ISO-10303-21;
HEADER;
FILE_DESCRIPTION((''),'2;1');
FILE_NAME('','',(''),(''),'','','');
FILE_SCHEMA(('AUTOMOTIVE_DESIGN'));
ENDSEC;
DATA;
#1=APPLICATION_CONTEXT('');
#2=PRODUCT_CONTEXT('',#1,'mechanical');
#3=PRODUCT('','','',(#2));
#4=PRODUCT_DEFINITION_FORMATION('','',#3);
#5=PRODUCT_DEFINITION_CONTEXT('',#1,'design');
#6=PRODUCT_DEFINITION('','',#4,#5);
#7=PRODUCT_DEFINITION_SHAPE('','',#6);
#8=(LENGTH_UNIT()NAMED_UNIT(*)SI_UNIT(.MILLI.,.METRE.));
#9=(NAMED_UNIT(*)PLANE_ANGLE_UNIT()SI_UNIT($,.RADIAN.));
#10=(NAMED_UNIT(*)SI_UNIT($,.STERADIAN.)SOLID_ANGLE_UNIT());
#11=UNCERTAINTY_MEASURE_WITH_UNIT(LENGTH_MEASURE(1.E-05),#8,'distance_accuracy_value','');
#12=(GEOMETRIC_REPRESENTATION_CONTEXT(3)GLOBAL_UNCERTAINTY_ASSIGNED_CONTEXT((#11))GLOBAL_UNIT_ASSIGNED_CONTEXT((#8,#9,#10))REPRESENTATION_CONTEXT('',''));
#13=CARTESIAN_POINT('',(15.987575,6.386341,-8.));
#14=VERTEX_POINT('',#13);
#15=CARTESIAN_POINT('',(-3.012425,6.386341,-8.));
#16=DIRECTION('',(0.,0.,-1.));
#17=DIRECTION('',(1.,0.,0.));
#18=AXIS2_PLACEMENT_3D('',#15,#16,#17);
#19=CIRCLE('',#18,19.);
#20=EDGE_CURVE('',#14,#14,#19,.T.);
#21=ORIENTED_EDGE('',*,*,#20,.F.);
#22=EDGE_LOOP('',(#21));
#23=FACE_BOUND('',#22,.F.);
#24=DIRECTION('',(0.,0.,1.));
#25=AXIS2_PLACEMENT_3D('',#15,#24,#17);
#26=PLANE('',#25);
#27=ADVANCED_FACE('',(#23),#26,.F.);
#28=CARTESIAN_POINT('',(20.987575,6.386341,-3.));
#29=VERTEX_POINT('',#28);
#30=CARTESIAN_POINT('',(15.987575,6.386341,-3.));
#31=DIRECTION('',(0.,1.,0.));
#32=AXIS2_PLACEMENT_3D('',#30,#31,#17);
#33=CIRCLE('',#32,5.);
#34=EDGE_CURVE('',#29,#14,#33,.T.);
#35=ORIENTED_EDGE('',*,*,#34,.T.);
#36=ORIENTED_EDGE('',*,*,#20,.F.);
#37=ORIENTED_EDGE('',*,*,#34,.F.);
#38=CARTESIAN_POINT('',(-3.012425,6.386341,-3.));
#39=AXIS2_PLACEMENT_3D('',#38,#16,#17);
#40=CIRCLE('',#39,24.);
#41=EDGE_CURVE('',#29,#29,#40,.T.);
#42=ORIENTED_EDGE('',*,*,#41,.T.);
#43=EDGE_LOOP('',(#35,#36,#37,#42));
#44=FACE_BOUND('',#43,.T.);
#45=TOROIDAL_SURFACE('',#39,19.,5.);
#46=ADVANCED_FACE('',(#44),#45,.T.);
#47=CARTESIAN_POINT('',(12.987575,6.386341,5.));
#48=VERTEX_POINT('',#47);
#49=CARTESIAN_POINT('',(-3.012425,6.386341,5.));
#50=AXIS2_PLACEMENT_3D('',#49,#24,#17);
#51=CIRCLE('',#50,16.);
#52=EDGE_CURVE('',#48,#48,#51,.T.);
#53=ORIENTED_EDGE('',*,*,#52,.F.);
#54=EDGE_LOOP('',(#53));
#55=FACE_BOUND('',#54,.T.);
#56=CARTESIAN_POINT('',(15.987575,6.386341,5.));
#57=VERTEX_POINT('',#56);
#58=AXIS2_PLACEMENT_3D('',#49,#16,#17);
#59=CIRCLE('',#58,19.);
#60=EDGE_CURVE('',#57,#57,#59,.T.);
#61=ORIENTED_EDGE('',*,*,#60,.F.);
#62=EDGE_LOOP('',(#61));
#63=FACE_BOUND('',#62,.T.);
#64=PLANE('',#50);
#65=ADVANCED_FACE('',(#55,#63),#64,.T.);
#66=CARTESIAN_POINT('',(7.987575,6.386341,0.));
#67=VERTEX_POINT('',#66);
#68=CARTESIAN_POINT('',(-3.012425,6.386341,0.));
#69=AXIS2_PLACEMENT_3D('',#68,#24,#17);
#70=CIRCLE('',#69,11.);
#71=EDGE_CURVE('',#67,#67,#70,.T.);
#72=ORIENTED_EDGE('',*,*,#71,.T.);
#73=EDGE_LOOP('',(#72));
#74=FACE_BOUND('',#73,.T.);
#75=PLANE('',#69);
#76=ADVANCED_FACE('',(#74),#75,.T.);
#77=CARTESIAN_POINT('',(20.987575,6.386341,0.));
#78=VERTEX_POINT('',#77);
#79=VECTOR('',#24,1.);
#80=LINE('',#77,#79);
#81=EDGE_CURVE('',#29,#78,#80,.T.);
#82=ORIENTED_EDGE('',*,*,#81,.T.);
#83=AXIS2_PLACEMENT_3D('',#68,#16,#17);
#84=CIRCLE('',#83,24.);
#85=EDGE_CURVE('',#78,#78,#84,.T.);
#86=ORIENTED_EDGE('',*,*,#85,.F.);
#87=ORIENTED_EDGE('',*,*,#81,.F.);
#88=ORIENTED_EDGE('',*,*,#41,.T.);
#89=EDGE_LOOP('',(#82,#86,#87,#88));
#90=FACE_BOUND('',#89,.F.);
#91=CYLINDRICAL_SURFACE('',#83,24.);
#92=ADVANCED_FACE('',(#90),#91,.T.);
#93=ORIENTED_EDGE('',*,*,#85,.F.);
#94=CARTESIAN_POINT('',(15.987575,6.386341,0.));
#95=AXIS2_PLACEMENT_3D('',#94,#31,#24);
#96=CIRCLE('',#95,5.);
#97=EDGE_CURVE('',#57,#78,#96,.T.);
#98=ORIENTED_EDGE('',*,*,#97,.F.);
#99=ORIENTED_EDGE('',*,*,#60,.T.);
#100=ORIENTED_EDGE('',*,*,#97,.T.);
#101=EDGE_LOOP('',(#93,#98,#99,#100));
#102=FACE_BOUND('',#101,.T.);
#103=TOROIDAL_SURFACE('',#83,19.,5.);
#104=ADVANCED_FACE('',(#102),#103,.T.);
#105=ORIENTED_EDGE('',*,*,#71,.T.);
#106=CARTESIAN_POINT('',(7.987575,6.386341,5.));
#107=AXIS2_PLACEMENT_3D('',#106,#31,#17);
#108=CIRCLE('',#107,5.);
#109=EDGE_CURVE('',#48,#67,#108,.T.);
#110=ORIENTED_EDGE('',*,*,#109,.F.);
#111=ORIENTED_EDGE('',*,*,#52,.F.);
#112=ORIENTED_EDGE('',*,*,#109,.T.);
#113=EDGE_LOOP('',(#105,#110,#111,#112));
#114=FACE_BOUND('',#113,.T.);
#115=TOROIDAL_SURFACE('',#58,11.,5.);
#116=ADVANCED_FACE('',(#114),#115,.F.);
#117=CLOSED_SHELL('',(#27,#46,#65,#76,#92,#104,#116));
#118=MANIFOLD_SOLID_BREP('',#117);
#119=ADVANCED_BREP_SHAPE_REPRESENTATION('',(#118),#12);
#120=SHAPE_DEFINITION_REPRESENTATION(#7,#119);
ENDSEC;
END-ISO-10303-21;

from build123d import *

# Parameters (mm, degrees)
F0_R     = 16
F1_DEPTH = 5
F2_T     = 8


# Not quite as in the source:
# - a fillet or chamfer that OpenCascade refuses, or shapes differently, is made with other operations: its cross-section is extruded or revolved along the edge and cut away or added
# - two fillets or chamfers of one size are made in one step
# - a feature of the source that left no trace in its solid (it failed there, or was rolled back) is left out


with BuildPart() as f1:
    # F0 (on Top) → F1 (new body)
    with BuildSketch(Plane.XY):
        with Locations((-3.0124252662, 6.3863405958)):
            Circle(F0_R)
    extrude(amount=F1_DEPTH)

    # F2
    f2_openings = [f1.faces().sort_by_distance(p)[0] for p in [
        (-3.012425, 6.386341, 5),
    ]]
    offset(amount=F2_T, openings=f2_openings, kind=Kind.INTERSECTION)

    # F3: fillet of radius 5 on 3 edges, made by hand

    # F3_s1 → F3_t2 (revolve)
    with BuildSketch(Plane.XZ.offset(-6.3863405958)):
        with BuildLine():
            ThreePointArc((12.9875747338, 5), (11.5231086397, 1.4644660941), (7.9875747338, 0))
            Line((7.9875747338, 0), (12.9875747338, 0))
            Line((12.9875747338, 0), (12.9875747338, 5))
        make_face()
    revolve(axis=Axis((-3.0124252662, 6.3863405958, 0), (0, 0, 1)))

    # F3_s3 → F3_t4 (revolve, cut)
    with BuildSketch(Plane.XZ.offset(-6.3863405958)):
        with BuildLine():
            ThreePointArc((15.9875747338, 5), (19.5231086397, 3.5355339059), (20.9875747338, 0))
            Line((20.9875747338, 0), (20.9875747338, 5))
            Line((20.9875747338, 5), (15.9875747338, 5))
        make_face()
    revolve(axis=Axis((-3.0124252662, 6.3863405958, 5), (0, 0, -1)), mode=Mode.SUBTRACT)

    # F3_s5 → F3_t6 (revolve, cut)
    with BuildSketch(Plane.XZ.offset(-6.3863405958)):
        with BuildLine():
            ThreePointArc((20.9875747338, -3), (19.5231086397, -6.5355339059), (15.9875747338, -8))
            Line((15.9875747338, -8), (20.9875747338, -8))
            Line((20.9875747338, -8), (20.9875747338, -3))
        make_face()
    revolve(axis=Axis((-3.0124252662, 6.3863405958, -8), (0, 0, -1)), mode=Mode.SUBTRACT)


solid = f1.part
